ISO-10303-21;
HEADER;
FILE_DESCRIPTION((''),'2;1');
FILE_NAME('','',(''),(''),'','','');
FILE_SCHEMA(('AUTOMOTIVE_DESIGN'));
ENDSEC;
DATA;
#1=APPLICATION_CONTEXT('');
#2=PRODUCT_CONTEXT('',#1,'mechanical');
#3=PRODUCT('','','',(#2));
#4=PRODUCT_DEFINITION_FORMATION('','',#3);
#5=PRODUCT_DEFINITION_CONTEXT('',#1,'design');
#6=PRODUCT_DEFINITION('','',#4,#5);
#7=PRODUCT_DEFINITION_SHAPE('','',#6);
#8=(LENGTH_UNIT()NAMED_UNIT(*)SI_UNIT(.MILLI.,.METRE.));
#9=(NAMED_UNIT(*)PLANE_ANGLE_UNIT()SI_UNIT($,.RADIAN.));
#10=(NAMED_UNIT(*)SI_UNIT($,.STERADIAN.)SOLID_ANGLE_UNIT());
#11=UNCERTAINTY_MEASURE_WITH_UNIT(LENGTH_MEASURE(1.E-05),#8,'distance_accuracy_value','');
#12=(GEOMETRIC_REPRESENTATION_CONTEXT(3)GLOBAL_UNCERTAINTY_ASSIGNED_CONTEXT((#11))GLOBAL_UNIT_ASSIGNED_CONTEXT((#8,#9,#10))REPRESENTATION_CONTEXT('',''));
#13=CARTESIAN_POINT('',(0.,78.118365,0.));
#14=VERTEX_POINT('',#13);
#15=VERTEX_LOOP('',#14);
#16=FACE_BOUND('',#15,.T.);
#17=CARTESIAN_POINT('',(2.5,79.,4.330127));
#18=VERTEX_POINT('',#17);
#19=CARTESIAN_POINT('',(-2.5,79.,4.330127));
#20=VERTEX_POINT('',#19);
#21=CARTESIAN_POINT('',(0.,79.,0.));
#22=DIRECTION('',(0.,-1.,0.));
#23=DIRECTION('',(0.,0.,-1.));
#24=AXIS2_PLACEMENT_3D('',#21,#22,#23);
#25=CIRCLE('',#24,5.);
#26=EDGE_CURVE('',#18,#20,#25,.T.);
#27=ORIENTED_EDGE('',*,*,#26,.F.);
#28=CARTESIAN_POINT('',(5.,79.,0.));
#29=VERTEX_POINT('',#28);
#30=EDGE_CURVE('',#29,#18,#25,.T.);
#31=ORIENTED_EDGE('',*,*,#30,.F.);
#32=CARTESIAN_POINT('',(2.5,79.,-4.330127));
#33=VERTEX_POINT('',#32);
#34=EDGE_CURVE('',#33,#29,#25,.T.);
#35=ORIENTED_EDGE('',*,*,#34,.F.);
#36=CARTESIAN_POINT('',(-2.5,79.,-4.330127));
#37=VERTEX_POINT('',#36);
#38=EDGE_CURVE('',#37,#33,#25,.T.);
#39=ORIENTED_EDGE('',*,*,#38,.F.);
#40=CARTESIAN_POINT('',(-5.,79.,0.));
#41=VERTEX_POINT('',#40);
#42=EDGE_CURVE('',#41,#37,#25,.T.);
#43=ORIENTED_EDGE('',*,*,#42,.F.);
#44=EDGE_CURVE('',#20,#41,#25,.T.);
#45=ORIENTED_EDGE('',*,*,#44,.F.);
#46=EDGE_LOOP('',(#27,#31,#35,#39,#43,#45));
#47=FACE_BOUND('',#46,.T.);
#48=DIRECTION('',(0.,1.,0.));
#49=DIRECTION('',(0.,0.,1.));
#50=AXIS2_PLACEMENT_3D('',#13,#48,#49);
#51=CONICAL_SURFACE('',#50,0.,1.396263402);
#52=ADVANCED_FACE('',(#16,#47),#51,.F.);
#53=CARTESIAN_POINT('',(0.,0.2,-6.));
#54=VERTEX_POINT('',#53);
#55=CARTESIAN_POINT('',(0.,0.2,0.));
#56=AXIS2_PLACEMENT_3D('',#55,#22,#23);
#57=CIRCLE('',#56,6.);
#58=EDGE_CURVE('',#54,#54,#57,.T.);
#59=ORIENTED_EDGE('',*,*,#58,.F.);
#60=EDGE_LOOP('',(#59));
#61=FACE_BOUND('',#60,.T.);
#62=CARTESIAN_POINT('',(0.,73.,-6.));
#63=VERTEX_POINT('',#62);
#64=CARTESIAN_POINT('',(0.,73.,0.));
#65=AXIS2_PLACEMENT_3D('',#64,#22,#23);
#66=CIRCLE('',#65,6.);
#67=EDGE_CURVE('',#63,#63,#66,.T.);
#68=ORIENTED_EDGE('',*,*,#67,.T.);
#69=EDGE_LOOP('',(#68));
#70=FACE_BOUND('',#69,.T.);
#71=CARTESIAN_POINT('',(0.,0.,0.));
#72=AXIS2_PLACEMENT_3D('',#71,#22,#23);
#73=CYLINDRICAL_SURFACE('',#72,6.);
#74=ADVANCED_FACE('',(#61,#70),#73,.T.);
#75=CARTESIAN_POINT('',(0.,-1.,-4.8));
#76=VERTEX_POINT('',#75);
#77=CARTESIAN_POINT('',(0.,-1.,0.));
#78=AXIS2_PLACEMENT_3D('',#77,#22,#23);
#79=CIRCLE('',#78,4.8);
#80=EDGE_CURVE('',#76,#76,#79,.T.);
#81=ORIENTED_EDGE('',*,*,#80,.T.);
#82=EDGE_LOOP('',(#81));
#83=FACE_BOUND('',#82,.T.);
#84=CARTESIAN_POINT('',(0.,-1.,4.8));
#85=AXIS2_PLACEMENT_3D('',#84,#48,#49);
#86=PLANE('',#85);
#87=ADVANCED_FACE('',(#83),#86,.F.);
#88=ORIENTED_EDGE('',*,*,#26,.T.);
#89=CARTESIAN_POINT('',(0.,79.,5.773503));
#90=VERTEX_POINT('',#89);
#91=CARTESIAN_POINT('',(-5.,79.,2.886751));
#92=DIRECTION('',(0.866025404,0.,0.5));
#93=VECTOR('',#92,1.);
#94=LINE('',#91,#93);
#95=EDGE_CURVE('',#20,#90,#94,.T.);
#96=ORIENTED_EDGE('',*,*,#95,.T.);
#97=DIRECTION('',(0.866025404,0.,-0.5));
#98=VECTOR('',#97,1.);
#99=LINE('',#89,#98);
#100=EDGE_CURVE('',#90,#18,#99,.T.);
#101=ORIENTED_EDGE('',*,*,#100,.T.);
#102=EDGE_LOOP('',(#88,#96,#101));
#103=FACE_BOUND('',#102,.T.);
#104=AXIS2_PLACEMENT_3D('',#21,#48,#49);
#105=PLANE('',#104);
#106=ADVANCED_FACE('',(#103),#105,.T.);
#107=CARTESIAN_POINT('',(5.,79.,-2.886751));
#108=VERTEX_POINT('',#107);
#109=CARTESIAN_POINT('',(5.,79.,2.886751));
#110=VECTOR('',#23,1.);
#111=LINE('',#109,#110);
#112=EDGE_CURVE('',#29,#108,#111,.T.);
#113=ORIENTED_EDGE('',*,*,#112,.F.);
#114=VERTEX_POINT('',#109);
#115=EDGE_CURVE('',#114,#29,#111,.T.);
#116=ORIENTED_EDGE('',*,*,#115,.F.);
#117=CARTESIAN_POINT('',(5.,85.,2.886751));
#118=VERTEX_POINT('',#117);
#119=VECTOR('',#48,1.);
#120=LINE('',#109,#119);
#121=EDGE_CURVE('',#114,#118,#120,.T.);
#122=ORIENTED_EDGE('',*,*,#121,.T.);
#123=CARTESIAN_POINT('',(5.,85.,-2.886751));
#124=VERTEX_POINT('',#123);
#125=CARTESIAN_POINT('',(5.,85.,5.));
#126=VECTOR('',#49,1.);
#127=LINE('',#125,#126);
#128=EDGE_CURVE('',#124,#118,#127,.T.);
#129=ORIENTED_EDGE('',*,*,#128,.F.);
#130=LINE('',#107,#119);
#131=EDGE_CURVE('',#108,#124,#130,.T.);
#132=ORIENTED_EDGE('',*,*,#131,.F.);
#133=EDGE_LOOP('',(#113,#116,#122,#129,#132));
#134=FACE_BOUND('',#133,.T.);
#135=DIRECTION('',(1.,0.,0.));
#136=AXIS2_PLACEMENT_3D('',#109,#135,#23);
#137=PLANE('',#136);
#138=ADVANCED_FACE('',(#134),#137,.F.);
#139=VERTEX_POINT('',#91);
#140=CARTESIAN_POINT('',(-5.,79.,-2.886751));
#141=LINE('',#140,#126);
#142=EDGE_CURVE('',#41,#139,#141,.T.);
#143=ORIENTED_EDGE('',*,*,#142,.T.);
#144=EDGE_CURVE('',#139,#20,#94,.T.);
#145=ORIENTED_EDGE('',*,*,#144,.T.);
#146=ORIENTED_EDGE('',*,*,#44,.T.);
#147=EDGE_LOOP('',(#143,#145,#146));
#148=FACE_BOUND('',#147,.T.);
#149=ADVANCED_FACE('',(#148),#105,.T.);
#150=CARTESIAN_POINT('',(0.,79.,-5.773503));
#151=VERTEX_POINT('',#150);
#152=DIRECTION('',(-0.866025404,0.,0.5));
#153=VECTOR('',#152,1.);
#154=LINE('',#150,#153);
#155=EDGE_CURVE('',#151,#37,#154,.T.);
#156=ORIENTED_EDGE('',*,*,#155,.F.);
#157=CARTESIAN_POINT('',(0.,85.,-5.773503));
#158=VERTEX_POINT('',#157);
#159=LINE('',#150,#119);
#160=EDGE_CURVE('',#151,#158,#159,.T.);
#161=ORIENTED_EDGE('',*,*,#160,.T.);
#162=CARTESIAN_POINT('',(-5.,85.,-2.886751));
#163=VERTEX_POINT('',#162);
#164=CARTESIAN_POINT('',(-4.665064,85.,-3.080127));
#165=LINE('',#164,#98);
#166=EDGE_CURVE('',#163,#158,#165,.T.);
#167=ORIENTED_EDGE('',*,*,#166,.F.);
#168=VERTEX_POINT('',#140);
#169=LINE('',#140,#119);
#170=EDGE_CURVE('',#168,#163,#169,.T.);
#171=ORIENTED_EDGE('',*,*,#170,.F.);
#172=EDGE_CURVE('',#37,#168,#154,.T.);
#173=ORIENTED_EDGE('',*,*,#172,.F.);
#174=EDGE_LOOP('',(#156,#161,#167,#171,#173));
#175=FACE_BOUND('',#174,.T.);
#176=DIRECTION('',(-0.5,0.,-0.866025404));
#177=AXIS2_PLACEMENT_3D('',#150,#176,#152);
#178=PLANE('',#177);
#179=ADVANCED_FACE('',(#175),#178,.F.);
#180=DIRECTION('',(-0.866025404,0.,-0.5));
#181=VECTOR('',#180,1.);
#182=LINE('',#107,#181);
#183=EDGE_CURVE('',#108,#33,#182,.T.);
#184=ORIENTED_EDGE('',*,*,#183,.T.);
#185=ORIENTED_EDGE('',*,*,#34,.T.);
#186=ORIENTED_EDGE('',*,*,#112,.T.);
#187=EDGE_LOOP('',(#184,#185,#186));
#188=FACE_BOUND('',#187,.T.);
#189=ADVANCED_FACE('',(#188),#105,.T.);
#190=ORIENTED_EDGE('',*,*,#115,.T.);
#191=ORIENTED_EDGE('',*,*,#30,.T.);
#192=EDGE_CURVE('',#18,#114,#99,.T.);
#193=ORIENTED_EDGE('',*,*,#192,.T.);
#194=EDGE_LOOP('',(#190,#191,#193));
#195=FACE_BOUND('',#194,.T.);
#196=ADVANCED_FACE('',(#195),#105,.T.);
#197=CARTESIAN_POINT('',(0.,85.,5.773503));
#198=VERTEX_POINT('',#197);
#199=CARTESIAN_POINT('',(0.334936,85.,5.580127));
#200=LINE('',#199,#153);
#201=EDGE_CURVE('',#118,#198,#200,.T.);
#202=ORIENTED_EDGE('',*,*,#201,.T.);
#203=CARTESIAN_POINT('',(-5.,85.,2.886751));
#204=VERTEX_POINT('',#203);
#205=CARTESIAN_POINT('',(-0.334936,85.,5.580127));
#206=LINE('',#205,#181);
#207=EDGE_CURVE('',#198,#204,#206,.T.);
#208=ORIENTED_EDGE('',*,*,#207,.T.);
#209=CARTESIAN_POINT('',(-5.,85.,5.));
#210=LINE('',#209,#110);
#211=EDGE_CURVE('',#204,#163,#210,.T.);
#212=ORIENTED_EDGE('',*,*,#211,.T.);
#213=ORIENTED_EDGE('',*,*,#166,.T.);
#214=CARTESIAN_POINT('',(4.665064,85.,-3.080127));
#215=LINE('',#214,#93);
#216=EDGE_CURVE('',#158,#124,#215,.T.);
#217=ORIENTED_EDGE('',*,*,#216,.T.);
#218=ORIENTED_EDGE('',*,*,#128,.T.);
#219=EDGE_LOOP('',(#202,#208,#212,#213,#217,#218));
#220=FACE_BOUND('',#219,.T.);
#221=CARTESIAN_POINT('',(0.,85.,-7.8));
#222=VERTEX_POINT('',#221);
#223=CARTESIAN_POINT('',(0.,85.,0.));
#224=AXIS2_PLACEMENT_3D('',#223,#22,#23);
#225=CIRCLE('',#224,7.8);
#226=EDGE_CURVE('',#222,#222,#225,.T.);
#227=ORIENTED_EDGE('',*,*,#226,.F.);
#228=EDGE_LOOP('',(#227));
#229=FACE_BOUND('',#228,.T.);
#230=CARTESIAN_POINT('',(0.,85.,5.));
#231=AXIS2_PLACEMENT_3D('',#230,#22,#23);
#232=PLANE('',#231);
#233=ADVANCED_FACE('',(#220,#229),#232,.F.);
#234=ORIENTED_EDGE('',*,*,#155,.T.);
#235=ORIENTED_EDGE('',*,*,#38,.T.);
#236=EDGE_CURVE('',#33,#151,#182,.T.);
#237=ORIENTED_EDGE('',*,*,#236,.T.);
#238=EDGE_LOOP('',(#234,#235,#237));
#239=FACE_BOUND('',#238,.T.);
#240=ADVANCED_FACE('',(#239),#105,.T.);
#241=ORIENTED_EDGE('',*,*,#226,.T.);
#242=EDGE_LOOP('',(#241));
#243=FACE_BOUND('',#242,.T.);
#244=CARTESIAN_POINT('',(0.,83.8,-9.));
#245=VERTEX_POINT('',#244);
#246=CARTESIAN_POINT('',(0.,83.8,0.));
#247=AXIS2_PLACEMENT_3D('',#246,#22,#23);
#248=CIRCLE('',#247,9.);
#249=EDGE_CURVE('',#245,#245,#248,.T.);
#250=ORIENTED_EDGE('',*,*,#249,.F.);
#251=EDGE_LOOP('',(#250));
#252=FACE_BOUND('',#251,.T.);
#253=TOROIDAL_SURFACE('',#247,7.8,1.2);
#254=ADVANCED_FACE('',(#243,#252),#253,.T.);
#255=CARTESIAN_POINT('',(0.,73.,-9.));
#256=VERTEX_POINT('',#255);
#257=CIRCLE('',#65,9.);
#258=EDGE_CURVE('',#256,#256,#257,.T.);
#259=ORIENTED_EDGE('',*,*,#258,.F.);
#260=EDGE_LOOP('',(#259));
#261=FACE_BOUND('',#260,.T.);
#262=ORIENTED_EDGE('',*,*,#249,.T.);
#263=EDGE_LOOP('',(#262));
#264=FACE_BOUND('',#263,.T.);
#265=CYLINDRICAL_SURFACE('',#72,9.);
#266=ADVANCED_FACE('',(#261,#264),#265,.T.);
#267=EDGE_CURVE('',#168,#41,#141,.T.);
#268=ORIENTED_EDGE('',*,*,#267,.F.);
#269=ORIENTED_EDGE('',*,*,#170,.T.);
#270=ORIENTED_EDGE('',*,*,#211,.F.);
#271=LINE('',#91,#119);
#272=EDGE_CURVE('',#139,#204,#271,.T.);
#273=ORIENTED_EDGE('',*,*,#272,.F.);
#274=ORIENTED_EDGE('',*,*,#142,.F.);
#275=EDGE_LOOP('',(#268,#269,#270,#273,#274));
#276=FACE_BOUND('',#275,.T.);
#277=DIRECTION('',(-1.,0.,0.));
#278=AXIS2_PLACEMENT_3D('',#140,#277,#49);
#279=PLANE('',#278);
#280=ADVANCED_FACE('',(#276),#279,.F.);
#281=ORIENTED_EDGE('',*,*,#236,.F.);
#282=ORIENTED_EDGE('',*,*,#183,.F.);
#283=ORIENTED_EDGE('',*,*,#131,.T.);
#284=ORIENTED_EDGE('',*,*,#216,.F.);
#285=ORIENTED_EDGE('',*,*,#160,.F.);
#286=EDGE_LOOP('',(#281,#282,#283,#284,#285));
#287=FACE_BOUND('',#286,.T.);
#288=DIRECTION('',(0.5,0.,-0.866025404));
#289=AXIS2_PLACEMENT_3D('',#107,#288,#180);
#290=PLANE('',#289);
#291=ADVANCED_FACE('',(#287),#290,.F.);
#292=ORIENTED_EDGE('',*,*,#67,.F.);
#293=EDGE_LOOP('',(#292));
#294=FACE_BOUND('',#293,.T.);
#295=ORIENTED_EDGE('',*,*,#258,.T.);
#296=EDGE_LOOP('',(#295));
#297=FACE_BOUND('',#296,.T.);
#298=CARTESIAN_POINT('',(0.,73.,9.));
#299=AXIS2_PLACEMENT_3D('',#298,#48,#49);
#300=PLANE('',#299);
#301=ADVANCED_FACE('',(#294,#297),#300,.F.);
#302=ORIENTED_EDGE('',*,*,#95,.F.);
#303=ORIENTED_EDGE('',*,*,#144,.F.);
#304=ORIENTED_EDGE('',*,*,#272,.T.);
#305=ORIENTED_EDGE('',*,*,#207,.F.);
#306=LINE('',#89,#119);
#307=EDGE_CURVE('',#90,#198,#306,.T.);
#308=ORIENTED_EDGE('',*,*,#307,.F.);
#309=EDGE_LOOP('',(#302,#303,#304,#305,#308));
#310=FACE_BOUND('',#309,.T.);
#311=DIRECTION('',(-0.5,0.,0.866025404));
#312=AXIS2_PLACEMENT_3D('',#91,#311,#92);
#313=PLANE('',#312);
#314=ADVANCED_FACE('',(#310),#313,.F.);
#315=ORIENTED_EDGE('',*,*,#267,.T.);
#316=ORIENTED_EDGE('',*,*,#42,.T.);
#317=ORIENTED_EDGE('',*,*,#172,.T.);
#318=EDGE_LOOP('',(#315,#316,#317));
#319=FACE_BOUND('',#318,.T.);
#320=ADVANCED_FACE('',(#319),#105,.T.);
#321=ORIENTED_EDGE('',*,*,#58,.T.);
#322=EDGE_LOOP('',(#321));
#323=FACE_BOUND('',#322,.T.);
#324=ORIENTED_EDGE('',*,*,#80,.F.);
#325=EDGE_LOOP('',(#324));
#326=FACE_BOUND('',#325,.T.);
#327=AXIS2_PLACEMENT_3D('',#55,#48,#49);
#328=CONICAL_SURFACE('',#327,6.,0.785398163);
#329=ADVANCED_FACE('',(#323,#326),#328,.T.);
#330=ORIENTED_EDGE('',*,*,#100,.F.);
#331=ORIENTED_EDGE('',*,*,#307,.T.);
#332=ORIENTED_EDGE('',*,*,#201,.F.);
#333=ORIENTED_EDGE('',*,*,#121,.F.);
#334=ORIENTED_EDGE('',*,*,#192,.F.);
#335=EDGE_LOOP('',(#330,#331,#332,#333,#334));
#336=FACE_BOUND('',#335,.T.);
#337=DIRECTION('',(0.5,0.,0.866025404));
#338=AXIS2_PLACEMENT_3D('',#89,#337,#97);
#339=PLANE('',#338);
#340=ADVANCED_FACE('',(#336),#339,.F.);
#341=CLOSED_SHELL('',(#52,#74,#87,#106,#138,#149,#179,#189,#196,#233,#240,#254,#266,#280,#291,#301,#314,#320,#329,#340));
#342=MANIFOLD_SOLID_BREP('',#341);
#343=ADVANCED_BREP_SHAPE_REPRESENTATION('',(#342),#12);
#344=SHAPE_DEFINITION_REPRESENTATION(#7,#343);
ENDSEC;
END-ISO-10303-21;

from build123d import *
from build123d.topology import SkipClean

# Parameters (mm, degrees)
CUT_EXTRUDE1_DEPTH = 6


# Read off the part's stored shape, not the designer's step: Move Face1
with BuildPart() as part:
    # Sketch1 → Revolve1 (revolve)
    with BuildSketch(Plane(origin=(0, 0, 0), x_dir=(0, 0, -1), z_dir=(1, 0, 0)), mode=Mode.PRIVATE) as revolve1_sk:
        with BuildLine():
            Line((0, 78.118365096), (-5, 79))
            Line((-5, 79), (-5, 85))
            Line((-5, 85), (-7.8, 85))
            ThreePointArc((-7.8, 85), (-8.648528137, 84.648528137), (-9, 83.8))
            Line((-9, 83.8), (-9, 73))
            Line((-9, 73), (-6, 73))
            Line((-6, 73), (-6, 1.2))
            Line((-6, 1.2), (-4.8, 0))
            Line((-4.8, 0), (0, 0))
            Line((0, 0), (0, 78.118365096))
        make_face()
    revolve(revolve1_sk.sketch.rotate(Axis((0, 0, 0), (0, 1, 0)), 180), axis=Axis((0, 0, 0), (0, 1, 0)))

    # Sketch2 → Cut-Extrude1 (cut)
    with BuildSketch(Plane(origin=(0, 85, 0), x_dir=(1, 0, 0), z_dir=(0, 1, 0))):
        Polygon((0, 5.773502692), (-5, 2.886751346), (-5, -2.886751346), (0, -5.773502692), (5, -2.886751346), (5, 2.886751346), align=None)
    extrude(amount=-CUT_EXTRUDE1_DEPTH, mode=Mode.SUBTRACT)

    # Move Face1 outline → Move Face1 (revolve)
    with SkipClean():  # the faces are left unmerged after this step: merging them gives an invalid solid
        with BuildSketch(Plane.XY):
            Polygon((0, -1), (4.8, -1), (6, 0.2), (6, 1.2), (4.8, 0), (0, 0), align=None)
        revolve(axis=Axis((0, 0, 0), (0, 1, 0)))
    add(part.part.scale(1), mode=Mode.REPLACE)  # the faces are merged on a copy


solid = part.part
